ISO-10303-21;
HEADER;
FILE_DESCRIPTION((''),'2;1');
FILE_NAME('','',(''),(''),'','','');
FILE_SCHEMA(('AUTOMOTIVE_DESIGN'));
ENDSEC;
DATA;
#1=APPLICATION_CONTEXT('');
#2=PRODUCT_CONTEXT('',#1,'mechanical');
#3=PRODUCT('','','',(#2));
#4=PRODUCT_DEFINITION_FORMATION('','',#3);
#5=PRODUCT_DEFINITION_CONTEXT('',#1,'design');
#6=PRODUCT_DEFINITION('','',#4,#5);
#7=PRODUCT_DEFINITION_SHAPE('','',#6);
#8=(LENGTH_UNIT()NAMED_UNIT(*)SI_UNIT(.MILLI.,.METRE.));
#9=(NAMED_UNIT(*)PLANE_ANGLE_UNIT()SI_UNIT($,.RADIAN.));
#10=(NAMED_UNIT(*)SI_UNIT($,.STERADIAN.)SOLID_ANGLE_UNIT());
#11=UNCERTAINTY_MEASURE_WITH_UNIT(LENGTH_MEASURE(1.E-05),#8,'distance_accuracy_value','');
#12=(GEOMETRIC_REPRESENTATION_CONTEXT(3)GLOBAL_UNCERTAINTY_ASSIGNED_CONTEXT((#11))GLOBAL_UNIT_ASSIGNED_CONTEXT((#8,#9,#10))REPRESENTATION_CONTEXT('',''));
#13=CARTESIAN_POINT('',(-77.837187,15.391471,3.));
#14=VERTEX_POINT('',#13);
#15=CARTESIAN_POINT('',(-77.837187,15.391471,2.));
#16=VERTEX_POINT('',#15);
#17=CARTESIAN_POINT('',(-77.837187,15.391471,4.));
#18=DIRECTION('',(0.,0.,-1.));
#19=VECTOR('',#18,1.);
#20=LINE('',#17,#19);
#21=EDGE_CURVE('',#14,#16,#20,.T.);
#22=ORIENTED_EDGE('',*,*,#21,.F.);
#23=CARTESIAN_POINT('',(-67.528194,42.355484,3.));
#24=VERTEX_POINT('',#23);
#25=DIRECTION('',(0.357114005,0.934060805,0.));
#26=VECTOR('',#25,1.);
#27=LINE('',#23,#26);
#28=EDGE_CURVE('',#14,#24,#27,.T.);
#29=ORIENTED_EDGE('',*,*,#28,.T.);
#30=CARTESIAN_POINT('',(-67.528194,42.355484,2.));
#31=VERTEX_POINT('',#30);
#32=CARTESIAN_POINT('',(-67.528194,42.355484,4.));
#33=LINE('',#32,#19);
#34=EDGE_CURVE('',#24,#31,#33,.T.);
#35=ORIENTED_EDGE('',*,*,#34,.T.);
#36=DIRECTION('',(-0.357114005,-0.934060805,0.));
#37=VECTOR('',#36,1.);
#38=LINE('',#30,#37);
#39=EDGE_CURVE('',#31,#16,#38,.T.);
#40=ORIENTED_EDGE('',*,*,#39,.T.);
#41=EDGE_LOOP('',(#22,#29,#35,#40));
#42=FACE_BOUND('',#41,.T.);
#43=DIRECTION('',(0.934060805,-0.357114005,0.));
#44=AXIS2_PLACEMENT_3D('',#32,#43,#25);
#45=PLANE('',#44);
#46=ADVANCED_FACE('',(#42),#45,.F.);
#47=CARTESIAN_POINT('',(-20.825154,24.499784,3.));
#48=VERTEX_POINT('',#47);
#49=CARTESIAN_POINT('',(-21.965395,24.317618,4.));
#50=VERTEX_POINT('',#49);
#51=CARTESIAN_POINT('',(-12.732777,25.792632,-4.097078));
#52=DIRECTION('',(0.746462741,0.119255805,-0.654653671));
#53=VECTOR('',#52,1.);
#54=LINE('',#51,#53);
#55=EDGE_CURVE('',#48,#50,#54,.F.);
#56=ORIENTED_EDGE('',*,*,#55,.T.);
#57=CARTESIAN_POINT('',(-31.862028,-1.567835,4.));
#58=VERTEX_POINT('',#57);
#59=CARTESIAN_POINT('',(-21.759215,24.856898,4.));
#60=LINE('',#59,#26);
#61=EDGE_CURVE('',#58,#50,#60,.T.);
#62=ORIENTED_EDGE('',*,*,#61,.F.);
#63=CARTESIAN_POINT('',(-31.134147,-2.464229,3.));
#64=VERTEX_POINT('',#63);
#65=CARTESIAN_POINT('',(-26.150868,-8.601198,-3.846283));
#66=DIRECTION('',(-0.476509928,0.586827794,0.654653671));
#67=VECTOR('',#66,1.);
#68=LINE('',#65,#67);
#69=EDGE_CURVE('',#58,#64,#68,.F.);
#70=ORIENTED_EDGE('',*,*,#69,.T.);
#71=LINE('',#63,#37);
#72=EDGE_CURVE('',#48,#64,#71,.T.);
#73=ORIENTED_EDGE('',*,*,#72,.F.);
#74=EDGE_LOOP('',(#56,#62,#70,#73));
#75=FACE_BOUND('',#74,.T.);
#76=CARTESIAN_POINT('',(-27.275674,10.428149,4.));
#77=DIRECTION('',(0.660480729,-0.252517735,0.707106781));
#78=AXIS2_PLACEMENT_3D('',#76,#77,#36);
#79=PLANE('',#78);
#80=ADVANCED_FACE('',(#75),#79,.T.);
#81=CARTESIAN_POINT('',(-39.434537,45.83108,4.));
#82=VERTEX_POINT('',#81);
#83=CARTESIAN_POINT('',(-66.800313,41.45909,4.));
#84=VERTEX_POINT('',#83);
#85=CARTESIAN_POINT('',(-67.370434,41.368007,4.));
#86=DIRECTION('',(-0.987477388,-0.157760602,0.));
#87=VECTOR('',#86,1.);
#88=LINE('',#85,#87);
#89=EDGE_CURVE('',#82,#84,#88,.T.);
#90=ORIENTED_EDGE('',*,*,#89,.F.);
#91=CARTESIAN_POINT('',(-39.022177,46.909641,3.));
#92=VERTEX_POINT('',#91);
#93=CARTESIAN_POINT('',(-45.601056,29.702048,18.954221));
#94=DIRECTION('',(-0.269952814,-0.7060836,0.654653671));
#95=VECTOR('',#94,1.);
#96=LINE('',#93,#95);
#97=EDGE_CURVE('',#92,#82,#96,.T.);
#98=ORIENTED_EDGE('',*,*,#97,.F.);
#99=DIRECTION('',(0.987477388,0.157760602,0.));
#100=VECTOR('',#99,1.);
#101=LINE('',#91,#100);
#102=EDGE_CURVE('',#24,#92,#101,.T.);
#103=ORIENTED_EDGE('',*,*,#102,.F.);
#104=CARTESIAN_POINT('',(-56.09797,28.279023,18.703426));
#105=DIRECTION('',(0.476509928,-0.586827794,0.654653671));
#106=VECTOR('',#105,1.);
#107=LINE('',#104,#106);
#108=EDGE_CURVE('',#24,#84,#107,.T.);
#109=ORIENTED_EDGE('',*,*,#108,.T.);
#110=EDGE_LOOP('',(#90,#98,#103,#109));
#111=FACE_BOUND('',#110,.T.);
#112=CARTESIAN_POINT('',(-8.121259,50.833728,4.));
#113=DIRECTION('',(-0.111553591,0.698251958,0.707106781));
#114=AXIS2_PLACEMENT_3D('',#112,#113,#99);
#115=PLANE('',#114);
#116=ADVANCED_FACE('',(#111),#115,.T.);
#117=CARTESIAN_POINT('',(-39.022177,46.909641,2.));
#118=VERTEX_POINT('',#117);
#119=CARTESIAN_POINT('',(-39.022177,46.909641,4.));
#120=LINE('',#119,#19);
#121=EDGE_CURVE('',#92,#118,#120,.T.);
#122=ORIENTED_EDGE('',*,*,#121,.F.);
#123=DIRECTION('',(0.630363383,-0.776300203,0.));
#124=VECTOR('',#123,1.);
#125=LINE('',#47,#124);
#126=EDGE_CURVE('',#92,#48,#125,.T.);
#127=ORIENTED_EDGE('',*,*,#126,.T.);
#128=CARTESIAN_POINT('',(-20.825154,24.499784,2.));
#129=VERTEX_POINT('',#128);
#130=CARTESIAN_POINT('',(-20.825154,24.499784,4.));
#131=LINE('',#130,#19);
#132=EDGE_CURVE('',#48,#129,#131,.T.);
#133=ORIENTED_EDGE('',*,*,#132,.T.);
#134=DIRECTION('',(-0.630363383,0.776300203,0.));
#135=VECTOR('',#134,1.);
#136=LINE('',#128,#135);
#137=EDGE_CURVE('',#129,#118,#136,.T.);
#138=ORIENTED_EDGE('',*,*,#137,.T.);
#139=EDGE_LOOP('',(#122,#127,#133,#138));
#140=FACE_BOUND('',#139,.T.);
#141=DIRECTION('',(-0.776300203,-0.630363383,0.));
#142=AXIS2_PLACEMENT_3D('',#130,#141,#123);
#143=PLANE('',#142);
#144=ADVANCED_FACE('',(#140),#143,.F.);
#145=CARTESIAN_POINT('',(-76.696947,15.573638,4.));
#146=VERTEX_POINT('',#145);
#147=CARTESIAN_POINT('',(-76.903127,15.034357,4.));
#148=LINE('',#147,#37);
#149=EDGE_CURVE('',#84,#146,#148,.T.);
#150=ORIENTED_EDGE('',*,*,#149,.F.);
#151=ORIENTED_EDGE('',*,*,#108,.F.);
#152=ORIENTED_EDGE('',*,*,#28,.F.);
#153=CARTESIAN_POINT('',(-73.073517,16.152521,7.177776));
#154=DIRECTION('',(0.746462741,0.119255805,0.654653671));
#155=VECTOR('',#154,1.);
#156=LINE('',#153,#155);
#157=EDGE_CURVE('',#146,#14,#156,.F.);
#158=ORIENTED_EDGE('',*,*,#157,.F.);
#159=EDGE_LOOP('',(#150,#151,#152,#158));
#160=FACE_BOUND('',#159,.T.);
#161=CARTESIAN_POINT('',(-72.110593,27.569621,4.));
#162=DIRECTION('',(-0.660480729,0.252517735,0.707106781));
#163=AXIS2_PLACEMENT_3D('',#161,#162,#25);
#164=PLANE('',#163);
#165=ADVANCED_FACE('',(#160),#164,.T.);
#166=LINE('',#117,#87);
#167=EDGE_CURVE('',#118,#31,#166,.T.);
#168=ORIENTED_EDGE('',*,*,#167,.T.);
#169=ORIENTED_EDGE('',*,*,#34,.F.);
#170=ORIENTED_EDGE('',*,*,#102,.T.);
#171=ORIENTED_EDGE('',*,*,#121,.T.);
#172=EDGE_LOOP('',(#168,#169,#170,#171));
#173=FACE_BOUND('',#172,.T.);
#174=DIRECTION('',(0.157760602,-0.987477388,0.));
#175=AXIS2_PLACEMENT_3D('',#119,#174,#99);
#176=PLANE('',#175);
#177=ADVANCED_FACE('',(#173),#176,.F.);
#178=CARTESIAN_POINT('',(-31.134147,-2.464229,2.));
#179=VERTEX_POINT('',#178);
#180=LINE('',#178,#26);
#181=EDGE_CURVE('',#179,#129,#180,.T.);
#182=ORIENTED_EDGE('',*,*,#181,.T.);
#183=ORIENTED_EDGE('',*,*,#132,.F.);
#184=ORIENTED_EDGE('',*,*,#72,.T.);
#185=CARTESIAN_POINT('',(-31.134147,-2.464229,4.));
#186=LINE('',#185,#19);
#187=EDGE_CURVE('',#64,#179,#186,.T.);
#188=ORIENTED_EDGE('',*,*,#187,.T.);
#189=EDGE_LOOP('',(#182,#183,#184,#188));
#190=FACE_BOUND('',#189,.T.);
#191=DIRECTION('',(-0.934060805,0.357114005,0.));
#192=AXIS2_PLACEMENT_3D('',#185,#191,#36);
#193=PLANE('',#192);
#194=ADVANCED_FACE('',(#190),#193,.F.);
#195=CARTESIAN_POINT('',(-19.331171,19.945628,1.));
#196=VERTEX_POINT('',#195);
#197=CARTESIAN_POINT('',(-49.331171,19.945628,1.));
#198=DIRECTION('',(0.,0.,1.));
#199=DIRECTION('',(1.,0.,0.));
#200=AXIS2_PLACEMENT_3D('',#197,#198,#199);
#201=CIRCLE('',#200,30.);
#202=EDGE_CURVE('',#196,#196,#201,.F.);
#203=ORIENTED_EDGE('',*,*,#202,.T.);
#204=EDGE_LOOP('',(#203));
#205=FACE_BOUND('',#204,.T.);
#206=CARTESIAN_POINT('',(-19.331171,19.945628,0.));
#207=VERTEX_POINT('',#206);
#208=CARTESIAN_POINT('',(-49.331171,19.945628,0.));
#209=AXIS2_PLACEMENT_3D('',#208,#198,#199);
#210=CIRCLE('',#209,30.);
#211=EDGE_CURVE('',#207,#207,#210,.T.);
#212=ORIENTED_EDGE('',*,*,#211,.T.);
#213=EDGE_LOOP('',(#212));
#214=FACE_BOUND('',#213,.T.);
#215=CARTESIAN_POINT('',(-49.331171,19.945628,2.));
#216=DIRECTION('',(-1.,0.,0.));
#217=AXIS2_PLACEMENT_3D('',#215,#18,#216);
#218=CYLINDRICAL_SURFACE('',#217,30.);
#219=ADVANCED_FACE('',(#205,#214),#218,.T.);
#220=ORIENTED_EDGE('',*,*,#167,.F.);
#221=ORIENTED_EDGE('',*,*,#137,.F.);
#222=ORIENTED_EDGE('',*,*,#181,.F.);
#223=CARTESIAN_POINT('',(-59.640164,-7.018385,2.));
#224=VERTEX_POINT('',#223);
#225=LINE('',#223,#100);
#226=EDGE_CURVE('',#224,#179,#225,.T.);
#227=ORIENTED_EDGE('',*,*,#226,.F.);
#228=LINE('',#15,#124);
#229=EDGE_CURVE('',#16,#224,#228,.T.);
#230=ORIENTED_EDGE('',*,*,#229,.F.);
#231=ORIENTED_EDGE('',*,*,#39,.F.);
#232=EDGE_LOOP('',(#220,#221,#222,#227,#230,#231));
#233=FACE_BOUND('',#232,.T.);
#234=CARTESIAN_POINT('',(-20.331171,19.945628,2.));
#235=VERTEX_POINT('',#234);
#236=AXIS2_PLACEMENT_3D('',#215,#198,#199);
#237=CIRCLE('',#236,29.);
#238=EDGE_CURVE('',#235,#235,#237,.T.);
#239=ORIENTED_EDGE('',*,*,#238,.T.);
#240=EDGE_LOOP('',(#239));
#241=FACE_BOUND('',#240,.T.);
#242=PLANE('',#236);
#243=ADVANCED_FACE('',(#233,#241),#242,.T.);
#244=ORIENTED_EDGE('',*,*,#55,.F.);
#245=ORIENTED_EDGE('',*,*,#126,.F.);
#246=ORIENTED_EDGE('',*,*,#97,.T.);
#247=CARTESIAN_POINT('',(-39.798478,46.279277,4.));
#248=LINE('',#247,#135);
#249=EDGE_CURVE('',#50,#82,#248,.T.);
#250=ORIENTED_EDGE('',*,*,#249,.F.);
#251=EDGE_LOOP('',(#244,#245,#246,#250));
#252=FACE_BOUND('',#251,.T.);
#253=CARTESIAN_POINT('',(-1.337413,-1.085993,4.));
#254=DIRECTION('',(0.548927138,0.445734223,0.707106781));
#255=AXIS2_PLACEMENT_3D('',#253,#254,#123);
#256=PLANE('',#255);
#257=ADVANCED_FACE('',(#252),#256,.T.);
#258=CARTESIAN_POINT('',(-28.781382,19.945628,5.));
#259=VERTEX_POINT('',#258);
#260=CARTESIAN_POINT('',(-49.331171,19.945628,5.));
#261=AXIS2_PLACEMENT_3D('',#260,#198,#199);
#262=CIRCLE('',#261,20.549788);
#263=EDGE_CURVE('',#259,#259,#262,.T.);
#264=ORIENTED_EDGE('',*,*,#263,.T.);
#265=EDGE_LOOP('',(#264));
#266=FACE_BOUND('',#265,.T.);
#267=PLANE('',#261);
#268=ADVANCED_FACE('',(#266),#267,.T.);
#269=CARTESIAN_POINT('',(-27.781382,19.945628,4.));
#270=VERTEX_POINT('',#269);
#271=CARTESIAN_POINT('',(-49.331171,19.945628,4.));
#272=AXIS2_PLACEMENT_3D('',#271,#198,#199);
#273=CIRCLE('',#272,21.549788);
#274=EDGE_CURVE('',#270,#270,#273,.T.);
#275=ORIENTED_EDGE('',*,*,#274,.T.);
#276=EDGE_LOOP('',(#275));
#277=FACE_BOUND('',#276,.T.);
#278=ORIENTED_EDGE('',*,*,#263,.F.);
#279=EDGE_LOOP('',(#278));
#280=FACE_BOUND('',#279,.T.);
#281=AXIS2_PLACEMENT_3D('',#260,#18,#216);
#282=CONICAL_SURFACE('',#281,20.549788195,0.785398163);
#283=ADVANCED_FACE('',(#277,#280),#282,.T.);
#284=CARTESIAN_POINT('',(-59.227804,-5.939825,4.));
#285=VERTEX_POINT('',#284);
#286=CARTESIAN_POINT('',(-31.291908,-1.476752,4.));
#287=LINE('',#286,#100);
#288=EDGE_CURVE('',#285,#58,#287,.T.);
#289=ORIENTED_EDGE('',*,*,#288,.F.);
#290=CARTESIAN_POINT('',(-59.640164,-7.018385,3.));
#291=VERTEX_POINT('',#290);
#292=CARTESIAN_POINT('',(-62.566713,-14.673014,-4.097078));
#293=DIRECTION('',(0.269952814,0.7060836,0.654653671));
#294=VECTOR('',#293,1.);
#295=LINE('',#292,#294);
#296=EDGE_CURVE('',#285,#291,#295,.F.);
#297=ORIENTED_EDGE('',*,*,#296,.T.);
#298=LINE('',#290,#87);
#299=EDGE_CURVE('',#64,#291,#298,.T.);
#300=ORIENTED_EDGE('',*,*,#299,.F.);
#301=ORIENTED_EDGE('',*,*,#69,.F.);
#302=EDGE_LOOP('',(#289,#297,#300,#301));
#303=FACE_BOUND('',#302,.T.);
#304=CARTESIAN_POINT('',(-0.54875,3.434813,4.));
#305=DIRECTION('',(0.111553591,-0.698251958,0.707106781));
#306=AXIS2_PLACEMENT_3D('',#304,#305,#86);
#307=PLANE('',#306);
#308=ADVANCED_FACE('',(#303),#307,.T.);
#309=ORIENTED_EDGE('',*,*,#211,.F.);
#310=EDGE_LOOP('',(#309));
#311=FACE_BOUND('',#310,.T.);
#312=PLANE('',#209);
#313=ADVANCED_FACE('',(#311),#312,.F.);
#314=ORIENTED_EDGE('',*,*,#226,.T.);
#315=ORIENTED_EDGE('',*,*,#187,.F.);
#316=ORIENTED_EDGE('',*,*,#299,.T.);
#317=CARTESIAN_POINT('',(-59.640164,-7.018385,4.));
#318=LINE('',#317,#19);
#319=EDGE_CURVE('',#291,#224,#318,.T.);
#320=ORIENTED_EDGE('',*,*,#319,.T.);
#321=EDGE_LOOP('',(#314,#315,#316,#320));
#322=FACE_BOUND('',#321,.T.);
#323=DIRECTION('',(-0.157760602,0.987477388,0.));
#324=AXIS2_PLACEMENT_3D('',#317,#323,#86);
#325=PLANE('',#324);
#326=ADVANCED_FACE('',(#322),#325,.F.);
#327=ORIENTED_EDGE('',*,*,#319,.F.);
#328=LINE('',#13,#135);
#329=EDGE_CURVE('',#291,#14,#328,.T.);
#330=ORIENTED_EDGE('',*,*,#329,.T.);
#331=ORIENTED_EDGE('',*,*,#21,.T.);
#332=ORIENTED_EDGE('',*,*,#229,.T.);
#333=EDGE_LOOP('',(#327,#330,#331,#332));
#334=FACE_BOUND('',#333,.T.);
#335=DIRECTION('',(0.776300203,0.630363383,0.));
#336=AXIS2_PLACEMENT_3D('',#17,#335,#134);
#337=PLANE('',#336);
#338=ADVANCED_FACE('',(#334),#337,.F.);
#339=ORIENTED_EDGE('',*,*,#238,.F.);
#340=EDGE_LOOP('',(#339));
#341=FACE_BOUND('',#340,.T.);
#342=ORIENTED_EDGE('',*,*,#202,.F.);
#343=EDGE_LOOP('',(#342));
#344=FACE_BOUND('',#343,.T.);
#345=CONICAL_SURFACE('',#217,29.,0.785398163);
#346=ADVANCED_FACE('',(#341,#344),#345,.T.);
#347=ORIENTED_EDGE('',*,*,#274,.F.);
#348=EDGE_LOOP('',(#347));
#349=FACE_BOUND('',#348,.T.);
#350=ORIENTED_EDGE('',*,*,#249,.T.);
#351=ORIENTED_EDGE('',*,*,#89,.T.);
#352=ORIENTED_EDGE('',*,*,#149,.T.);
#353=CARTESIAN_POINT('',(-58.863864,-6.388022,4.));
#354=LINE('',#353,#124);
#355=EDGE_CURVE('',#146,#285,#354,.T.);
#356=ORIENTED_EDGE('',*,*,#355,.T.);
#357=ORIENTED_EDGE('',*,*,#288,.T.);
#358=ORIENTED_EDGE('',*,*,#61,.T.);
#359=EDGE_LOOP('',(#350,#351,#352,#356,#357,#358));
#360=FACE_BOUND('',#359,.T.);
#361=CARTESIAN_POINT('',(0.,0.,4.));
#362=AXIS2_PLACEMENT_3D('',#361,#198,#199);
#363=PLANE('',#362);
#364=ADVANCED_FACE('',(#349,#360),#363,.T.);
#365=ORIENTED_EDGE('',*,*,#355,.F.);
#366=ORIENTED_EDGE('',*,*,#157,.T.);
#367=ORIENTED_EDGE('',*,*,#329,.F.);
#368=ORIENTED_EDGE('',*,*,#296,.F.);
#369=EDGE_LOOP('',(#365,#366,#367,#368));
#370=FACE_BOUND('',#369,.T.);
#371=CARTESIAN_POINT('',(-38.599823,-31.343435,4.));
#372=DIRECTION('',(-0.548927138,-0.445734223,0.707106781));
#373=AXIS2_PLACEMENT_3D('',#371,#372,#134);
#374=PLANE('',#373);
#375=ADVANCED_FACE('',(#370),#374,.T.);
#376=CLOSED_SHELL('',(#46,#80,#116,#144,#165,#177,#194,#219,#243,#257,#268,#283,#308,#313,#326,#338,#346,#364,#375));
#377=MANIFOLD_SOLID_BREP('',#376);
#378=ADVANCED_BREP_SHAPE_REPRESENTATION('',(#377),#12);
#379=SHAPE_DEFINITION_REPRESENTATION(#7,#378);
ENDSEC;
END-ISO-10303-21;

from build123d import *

# Parameters (mm, degrees)
SKETCH_1_R      = 30
EXTRUDE_1_DEPTH = 2
EXTRUDE_2_DEPTH = 2
SKETCH_3_R      = 21.549788195
EXTRUDE_3_DEPTH = 1
CHAMFER_1_SIZE  = 1
CHAMFER_2_SIZE  = 1
CHAMFER_3_SIZE  = 1


with BuildPart() as part:
    # Эскиз1 → Бобышка-Вытянуть1 (new body)
    with BuildSketch(Plane.XY):
        with Locations((-49.331170663, 19.945627645)):
            Circle(SKETCH_1_R)
    extrude(amount=EXTRUDE_1_DEPTH)

    # Эскиз2 → Бобышка-Вытянуть2 (add)
    with BuildSketch(Plane.XY.offset(2)):
        Polygon((-20.825153864, 24.499783942), (-39.02217731, 46.909640502), (-67.528194109, 42.355484205), (-77.837187462, 15.391471347), (-59.640164016, -7.018385213), (-31.134147217, -2.464228916), align=None)
    extrude(amount=EXTRUDE_2_DEPTH)

    # Эскиз3 → Бобышка-Вытянуть3 (add)
    with BuildSketch(Plane.XY.offset(4)):
        with Locations((-49.331170663, 19.945627645)):
            Circle(SKETCH_3_R)
    extrude(amount=EXTRUDE_3_DEPTH)

    # Фаска1
    chamfer_1_edges = [part.edges().sort_by_distance(p)[0] for p in [
        (-25.97965054, 11.017777513, 4),
        (-29.923665587, 35.704712222, 4),
        (-53.275185709, 44.632562353, 4),
        (-72.682690785, 28.873477776, 4),
        (-68.738675739, 4.186543067, 4),
        (-45.387155617, -4.741307064, 4),
    ]]
    chamfer(chamfer_1_edges, length=CHAMFER_1_SIZE)

    # Фаска2
    chamfer_2_edges = [part.edges().sort_by_distance(p)[0] for p in [
        (-70.880958858, 19.945627645, 5),
    ]]
    chamfer(chamfer_2_edges, length=CHAMFER_2_SIZE - 0.0001)  # a hair under: the kernel refuses the full size

    # Фаска3
    chamfer_3_edges = [part.edges().sort_by_distance(p)[0] for p in [
        (-79.331170663, 19.945627645, 2),
    ]]
    chamfer(chamfer_3_edges, length=CHAMFER_3_SIZE)


solid = part.part
